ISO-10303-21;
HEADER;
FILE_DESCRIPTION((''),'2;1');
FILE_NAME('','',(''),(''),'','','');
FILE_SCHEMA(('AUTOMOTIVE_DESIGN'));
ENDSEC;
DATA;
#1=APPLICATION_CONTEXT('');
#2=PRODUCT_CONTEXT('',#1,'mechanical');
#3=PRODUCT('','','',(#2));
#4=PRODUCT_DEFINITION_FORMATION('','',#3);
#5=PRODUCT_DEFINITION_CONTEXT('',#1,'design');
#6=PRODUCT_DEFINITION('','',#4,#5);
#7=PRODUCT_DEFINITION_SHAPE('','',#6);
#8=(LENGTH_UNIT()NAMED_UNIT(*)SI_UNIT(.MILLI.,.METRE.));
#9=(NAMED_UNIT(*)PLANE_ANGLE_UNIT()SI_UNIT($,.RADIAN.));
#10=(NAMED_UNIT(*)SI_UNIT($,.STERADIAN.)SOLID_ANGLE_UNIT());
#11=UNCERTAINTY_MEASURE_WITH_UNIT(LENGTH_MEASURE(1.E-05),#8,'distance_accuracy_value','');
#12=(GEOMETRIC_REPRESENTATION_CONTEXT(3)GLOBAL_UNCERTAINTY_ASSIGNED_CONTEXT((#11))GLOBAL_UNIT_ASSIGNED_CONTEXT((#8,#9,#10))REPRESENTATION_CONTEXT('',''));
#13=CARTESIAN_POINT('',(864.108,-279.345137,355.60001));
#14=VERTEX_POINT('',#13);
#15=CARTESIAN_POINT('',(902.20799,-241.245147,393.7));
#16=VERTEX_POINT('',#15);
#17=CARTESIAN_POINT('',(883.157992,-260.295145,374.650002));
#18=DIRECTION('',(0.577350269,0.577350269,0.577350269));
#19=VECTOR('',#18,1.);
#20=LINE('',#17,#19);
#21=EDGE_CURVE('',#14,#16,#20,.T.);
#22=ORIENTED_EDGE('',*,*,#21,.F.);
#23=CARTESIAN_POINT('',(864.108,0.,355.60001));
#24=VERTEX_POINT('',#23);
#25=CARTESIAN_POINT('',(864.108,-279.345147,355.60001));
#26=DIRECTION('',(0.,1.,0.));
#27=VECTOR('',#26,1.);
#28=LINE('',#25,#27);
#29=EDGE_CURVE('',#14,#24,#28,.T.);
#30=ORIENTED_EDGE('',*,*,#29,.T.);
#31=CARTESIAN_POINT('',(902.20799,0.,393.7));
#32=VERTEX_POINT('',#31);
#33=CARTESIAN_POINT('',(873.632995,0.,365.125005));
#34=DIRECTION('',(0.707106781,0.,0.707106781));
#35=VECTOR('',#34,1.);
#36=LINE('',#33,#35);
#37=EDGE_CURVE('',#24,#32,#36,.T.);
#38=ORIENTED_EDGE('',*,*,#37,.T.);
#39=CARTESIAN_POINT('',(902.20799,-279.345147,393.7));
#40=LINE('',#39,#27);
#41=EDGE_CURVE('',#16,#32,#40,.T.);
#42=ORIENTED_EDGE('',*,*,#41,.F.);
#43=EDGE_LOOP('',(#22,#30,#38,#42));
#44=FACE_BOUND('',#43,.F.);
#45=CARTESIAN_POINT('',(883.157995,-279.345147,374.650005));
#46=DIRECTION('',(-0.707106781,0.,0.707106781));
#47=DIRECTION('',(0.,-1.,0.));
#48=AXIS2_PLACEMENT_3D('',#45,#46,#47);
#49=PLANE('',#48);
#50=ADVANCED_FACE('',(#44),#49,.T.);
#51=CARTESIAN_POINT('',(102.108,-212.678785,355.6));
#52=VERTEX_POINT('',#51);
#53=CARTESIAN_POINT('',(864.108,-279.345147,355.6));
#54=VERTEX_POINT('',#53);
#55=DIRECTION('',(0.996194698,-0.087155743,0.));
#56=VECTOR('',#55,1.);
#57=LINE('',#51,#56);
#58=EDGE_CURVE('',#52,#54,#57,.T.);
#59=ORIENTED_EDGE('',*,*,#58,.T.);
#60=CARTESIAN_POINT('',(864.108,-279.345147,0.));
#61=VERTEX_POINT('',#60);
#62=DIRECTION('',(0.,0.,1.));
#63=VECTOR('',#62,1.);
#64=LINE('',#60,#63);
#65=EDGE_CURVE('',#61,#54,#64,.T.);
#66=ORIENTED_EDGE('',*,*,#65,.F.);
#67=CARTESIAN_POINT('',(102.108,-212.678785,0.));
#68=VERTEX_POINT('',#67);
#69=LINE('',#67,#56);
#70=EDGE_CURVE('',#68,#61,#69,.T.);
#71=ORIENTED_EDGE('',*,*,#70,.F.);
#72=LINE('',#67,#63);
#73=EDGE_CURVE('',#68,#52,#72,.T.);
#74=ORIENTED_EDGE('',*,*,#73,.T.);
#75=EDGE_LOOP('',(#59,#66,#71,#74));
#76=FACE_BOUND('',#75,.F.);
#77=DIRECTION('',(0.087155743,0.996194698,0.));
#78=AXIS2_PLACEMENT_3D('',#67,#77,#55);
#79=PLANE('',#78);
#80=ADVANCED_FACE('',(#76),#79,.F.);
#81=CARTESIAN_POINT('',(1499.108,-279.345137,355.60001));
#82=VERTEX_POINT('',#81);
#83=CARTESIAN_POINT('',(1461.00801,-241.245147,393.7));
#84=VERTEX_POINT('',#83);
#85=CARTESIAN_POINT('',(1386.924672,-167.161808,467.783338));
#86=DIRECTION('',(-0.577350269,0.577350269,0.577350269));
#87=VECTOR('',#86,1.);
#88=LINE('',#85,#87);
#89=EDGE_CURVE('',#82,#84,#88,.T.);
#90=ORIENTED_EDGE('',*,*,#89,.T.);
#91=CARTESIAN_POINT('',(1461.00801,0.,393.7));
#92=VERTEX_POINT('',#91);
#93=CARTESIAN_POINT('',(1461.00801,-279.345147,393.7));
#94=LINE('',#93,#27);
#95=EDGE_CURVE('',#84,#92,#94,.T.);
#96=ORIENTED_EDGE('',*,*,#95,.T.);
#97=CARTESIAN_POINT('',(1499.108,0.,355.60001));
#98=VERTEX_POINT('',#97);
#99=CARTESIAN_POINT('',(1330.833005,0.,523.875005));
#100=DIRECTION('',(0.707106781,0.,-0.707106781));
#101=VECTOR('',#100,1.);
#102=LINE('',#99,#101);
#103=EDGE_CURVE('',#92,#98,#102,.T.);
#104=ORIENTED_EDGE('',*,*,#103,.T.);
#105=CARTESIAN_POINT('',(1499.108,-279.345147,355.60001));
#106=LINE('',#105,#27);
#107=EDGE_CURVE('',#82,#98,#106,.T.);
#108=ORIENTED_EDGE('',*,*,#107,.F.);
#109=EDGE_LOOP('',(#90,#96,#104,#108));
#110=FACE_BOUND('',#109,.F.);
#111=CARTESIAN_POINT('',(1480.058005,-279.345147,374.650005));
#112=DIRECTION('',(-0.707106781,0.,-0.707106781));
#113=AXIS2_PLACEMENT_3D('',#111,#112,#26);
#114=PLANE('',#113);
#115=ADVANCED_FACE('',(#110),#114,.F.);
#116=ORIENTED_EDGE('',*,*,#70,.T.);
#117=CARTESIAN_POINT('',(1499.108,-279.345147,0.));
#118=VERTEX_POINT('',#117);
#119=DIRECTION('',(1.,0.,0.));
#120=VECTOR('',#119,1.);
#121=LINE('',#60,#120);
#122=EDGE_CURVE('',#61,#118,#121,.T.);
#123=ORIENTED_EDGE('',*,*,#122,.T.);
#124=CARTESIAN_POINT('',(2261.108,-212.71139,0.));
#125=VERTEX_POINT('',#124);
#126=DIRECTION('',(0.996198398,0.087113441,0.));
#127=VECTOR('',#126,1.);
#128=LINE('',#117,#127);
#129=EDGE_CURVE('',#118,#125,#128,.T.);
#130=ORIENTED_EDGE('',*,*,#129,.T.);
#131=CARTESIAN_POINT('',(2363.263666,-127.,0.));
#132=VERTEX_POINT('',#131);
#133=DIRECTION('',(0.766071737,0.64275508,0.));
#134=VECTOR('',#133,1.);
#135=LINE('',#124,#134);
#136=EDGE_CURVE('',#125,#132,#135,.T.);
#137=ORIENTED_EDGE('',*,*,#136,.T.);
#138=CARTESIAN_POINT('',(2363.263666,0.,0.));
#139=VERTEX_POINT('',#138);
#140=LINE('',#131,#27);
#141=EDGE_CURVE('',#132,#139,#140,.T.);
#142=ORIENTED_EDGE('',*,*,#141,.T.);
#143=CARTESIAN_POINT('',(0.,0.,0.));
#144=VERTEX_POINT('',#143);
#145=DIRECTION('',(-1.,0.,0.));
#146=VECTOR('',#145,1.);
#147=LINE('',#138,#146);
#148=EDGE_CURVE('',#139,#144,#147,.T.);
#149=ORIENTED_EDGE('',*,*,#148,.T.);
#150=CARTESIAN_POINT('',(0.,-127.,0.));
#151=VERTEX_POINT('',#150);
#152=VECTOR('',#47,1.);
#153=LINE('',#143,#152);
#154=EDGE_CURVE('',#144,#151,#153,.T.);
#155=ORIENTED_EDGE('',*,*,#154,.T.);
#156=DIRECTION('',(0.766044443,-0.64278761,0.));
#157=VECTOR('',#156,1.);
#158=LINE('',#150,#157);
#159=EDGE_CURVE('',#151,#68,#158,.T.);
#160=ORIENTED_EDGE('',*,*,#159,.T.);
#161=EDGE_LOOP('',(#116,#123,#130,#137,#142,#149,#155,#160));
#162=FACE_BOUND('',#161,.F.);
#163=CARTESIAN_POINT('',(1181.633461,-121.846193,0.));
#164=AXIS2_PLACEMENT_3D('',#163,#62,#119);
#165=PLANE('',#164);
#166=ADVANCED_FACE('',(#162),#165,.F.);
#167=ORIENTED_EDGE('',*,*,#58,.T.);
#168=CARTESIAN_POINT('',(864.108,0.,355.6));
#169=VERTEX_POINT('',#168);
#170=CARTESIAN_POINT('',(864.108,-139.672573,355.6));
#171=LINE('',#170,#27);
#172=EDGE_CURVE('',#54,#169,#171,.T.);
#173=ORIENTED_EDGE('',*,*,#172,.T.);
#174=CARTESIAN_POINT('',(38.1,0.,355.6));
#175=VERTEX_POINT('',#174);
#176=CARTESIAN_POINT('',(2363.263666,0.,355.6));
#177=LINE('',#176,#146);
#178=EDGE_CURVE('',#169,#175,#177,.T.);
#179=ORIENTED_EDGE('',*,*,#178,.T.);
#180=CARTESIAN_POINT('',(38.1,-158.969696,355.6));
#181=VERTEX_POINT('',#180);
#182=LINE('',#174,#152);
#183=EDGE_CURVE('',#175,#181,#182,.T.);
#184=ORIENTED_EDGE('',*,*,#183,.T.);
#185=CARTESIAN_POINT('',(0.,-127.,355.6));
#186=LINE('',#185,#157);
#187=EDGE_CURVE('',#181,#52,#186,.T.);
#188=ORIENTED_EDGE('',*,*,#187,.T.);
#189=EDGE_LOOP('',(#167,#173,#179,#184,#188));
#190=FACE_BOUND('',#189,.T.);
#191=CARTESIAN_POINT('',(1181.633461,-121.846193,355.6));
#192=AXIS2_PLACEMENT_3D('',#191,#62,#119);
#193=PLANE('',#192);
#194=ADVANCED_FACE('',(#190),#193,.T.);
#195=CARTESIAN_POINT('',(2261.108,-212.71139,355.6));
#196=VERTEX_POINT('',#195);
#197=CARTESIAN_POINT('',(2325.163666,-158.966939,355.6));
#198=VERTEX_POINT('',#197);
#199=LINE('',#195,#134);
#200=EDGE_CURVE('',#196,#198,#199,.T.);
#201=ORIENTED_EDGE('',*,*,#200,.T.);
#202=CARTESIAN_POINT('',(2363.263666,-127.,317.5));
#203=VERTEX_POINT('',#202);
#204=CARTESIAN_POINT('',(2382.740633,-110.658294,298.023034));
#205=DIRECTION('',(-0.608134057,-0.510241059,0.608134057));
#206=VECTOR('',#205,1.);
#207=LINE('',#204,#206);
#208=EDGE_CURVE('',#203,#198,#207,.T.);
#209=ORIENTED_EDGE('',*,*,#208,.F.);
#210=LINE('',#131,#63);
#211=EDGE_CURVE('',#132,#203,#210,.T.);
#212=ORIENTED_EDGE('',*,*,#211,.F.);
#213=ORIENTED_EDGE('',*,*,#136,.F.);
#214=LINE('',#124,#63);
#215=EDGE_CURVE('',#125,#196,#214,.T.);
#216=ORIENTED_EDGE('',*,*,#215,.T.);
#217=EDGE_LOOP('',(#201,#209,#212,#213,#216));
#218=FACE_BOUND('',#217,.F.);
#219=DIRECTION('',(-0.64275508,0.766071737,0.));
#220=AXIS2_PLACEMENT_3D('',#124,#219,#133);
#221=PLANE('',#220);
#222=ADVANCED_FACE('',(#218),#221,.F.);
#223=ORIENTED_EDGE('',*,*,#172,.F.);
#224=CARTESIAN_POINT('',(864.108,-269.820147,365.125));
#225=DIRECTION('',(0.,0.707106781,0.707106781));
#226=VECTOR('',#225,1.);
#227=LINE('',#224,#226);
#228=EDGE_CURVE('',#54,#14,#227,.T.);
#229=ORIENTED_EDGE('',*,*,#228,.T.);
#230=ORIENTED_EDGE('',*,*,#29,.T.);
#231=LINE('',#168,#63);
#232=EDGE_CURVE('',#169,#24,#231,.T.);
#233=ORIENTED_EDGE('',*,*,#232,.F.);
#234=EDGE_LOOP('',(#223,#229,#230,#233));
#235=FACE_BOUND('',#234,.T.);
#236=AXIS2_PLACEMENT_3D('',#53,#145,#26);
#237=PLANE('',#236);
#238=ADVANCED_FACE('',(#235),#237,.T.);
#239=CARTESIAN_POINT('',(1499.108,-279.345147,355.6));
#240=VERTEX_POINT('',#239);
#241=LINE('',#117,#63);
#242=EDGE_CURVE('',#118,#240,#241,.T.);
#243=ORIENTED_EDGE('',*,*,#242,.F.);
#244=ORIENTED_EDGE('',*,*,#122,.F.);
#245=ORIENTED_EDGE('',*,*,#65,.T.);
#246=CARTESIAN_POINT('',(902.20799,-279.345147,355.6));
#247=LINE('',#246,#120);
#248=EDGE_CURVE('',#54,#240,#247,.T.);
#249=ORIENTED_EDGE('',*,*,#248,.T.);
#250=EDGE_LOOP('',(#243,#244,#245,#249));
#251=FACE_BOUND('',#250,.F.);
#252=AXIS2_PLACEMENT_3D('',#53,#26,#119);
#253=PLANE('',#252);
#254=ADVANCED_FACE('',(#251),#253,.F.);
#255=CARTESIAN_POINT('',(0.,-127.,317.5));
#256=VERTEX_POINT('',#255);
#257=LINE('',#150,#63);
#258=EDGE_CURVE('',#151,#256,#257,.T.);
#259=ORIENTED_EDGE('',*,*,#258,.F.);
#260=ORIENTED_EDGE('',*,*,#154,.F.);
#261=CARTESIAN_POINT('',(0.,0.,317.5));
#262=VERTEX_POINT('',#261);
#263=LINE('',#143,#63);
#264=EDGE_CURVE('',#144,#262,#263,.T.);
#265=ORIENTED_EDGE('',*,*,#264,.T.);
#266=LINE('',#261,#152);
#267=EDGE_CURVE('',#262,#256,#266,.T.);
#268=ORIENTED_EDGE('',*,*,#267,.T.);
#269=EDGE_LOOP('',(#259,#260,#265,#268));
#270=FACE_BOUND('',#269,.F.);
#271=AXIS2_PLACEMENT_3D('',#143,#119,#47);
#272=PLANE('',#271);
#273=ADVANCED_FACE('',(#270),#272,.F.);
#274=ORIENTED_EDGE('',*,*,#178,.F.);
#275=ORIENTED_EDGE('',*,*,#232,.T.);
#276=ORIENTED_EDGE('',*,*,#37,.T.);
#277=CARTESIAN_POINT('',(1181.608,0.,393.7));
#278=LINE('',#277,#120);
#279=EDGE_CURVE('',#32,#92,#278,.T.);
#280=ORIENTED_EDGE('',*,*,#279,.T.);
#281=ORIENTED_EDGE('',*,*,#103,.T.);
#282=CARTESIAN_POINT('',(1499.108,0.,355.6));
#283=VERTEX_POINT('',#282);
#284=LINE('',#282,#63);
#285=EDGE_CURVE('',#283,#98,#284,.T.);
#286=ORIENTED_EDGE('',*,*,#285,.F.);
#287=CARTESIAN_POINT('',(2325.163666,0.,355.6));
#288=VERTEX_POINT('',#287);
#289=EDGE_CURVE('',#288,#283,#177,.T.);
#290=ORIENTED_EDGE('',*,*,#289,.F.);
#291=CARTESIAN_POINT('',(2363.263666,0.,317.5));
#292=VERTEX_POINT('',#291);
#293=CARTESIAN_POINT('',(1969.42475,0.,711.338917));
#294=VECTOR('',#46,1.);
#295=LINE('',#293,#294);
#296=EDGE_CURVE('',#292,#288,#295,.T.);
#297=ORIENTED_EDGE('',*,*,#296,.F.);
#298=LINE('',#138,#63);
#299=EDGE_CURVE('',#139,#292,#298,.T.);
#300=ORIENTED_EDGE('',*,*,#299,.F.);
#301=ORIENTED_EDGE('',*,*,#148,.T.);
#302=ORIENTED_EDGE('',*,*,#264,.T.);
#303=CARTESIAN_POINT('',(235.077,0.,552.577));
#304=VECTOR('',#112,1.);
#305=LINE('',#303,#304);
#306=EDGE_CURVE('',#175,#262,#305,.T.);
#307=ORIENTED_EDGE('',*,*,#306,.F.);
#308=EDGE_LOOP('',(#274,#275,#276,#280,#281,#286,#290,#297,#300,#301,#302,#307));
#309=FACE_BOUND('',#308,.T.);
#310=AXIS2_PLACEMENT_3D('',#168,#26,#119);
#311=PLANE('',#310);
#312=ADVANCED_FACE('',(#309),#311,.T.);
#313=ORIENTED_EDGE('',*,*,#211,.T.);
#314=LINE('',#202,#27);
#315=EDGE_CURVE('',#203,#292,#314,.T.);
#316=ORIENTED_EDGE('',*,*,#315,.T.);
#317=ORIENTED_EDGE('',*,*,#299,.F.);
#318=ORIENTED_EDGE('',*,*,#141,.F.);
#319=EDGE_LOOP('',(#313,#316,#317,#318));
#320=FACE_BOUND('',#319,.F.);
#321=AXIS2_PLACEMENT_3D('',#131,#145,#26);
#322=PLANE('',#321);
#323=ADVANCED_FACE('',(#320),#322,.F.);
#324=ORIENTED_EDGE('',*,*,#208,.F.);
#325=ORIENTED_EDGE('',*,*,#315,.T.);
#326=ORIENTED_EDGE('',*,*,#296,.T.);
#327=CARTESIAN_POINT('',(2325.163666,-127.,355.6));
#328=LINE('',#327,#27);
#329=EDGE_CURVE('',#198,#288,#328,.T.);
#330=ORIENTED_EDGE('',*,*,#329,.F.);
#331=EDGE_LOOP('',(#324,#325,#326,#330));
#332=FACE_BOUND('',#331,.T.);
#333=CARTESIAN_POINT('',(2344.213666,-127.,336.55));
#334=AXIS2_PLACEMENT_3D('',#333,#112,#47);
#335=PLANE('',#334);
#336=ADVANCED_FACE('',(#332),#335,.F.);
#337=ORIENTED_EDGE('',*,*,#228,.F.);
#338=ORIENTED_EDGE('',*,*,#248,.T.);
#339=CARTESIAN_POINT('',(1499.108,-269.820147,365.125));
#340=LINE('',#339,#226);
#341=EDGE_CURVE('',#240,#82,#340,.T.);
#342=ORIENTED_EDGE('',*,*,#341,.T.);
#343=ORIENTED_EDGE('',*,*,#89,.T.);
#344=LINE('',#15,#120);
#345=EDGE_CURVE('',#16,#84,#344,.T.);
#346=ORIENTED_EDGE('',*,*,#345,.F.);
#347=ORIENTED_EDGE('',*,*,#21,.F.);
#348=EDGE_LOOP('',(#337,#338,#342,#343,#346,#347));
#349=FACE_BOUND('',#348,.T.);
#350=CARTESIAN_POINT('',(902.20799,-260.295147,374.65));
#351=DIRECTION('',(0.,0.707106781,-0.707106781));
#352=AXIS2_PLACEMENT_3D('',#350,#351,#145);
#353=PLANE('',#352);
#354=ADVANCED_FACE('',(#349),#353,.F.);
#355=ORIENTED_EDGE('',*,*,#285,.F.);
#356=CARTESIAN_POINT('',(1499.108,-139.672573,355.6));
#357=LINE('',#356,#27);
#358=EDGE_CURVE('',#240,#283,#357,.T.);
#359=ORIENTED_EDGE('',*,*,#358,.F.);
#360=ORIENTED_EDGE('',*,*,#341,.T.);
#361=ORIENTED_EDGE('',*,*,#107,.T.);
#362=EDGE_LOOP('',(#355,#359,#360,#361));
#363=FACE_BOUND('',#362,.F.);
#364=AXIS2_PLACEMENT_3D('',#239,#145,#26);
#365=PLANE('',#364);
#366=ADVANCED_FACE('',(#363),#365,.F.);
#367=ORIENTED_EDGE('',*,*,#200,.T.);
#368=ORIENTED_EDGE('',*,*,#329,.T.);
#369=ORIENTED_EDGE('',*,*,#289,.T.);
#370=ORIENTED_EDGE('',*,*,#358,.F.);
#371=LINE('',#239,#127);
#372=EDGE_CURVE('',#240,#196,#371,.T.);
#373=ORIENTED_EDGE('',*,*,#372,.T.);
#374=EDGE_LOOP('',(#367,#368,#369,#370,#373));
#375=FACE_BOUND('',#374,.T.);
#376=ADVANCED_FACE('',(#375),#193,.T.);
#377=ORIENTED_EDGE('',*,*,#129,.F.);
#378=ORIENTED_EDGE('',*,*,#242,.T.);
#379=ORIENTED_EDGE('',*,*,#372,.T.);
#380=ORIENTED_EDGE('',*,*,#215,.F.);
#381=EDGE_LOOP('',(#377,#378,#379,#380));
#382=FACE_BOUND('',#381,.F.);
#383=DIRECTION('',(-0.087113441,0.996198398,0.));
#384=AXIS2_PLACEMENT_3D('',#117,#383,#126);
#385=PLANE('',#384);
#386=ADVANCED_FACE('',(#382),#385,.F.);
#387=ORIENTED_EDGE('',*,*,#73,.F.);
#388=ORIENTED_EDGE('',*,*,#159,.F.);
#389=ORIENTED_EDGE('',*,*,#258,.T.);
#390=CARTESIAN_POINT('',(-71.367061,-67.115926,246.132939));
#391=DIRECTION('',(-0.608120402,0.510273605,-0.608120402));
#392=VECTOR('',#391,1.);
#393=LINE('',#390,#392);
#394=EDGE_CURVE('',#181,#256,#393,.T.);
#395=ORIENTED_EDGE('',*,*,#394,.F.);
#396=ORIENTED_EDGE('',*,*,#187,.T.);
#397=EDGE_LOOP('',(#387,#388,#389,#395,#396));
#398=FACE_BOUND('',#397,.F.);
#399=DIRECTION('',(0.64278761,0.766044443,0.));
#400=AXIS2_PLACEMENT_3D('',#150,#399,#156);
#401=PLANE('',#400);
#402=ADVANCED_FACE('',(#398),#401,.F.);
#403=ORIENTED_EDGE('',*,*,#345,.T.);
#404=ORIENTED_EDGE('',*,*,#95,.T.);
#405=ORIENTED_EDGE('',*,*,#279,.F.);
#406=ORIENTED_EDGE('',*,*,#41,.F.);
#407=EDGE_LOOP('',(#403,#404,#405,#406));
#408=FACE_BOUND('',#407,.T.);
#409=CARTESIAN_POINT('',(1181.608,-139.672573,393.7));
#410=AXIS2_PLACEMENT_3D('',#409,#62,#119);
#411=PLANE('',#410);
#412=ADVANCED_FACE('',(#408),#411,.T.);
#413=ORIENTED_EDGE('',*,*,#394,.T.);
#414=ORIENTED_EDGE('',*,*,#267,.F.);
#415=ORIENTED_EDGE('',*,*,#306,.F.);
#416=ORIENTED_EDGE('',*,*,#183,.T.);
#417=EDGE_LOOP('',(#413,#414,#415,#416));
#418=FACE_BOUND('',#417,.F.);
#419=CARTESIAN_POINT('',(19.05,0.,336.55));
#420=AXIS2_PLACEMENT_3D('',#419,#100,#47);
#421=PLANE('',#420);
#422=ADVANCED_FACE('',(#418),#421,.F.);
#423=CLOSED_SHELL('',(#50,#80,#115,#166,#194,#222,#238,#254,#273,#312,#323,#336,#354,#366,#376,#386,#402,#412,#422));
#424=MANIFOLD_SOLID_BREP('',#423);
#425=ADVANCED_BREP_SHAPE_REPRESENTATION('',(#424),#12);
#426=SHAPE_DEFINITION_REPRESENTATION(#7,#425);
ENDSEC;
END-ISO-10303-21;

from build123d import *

# Parameters (mm, degrees)
F1_DEPTH = 355.6
F2_W     = 635
F2_H     = 279.345146747
F3_DEPTH = 38.1
F4_SIZE  = 38.09999
F5_SIZE  = 38.1


# Not quite as in the source:
# - a fillet or chamfer is up to 0.001 mm smaller than in the source, because OpenCascade refuses the exact size


with BuildPart() as f1:
    # F0 (on Top) → F1 (new body)
    with BuildSketch(Plane.XY):
        Polygon((2363.263666194, 0), (0, 0), (0, -127), (102.108, -212.6787851403), (864.108, -279.345146747), (1499.108, -279.345146747), (2261.108, -212.7113899342), (2363.263666194, -127), align=None)
    extrude(amount=F1_DEPTH)

    # F2 (on face) → F3 (join)
    with BuildSketch(Plane.XY.offset(355.6)):
        with Locations((1181.608, -139.6725733735)):
            Rectangle(F2_W, F2_H)
    extrude(amount=F3_DEPTH)

    # F4 (size 38.1 in the source; OpenCascade refuses exactly that, so slightly less here)
    f4_edges = [f1.edges().sort_by_distance(p)[0] for p in [
        (864.108, -139.672573, 393.7),
        (1499.108, -139.672573, 393.7),
    ]]
    chamfer(f4_edges, length=F4_SIZE)

    # F5
    f5_edges = [f1.edges().sort_by_distance(p)[0] for p in [
        (0, -63.5, 355.6),
        (1181.608, -279.345147, 393.7),
        (2363.263666, -63.5, 355.6),
    ]]
    chamfer(f5_edges, length=F5_SIZE)


solid = f1.part
